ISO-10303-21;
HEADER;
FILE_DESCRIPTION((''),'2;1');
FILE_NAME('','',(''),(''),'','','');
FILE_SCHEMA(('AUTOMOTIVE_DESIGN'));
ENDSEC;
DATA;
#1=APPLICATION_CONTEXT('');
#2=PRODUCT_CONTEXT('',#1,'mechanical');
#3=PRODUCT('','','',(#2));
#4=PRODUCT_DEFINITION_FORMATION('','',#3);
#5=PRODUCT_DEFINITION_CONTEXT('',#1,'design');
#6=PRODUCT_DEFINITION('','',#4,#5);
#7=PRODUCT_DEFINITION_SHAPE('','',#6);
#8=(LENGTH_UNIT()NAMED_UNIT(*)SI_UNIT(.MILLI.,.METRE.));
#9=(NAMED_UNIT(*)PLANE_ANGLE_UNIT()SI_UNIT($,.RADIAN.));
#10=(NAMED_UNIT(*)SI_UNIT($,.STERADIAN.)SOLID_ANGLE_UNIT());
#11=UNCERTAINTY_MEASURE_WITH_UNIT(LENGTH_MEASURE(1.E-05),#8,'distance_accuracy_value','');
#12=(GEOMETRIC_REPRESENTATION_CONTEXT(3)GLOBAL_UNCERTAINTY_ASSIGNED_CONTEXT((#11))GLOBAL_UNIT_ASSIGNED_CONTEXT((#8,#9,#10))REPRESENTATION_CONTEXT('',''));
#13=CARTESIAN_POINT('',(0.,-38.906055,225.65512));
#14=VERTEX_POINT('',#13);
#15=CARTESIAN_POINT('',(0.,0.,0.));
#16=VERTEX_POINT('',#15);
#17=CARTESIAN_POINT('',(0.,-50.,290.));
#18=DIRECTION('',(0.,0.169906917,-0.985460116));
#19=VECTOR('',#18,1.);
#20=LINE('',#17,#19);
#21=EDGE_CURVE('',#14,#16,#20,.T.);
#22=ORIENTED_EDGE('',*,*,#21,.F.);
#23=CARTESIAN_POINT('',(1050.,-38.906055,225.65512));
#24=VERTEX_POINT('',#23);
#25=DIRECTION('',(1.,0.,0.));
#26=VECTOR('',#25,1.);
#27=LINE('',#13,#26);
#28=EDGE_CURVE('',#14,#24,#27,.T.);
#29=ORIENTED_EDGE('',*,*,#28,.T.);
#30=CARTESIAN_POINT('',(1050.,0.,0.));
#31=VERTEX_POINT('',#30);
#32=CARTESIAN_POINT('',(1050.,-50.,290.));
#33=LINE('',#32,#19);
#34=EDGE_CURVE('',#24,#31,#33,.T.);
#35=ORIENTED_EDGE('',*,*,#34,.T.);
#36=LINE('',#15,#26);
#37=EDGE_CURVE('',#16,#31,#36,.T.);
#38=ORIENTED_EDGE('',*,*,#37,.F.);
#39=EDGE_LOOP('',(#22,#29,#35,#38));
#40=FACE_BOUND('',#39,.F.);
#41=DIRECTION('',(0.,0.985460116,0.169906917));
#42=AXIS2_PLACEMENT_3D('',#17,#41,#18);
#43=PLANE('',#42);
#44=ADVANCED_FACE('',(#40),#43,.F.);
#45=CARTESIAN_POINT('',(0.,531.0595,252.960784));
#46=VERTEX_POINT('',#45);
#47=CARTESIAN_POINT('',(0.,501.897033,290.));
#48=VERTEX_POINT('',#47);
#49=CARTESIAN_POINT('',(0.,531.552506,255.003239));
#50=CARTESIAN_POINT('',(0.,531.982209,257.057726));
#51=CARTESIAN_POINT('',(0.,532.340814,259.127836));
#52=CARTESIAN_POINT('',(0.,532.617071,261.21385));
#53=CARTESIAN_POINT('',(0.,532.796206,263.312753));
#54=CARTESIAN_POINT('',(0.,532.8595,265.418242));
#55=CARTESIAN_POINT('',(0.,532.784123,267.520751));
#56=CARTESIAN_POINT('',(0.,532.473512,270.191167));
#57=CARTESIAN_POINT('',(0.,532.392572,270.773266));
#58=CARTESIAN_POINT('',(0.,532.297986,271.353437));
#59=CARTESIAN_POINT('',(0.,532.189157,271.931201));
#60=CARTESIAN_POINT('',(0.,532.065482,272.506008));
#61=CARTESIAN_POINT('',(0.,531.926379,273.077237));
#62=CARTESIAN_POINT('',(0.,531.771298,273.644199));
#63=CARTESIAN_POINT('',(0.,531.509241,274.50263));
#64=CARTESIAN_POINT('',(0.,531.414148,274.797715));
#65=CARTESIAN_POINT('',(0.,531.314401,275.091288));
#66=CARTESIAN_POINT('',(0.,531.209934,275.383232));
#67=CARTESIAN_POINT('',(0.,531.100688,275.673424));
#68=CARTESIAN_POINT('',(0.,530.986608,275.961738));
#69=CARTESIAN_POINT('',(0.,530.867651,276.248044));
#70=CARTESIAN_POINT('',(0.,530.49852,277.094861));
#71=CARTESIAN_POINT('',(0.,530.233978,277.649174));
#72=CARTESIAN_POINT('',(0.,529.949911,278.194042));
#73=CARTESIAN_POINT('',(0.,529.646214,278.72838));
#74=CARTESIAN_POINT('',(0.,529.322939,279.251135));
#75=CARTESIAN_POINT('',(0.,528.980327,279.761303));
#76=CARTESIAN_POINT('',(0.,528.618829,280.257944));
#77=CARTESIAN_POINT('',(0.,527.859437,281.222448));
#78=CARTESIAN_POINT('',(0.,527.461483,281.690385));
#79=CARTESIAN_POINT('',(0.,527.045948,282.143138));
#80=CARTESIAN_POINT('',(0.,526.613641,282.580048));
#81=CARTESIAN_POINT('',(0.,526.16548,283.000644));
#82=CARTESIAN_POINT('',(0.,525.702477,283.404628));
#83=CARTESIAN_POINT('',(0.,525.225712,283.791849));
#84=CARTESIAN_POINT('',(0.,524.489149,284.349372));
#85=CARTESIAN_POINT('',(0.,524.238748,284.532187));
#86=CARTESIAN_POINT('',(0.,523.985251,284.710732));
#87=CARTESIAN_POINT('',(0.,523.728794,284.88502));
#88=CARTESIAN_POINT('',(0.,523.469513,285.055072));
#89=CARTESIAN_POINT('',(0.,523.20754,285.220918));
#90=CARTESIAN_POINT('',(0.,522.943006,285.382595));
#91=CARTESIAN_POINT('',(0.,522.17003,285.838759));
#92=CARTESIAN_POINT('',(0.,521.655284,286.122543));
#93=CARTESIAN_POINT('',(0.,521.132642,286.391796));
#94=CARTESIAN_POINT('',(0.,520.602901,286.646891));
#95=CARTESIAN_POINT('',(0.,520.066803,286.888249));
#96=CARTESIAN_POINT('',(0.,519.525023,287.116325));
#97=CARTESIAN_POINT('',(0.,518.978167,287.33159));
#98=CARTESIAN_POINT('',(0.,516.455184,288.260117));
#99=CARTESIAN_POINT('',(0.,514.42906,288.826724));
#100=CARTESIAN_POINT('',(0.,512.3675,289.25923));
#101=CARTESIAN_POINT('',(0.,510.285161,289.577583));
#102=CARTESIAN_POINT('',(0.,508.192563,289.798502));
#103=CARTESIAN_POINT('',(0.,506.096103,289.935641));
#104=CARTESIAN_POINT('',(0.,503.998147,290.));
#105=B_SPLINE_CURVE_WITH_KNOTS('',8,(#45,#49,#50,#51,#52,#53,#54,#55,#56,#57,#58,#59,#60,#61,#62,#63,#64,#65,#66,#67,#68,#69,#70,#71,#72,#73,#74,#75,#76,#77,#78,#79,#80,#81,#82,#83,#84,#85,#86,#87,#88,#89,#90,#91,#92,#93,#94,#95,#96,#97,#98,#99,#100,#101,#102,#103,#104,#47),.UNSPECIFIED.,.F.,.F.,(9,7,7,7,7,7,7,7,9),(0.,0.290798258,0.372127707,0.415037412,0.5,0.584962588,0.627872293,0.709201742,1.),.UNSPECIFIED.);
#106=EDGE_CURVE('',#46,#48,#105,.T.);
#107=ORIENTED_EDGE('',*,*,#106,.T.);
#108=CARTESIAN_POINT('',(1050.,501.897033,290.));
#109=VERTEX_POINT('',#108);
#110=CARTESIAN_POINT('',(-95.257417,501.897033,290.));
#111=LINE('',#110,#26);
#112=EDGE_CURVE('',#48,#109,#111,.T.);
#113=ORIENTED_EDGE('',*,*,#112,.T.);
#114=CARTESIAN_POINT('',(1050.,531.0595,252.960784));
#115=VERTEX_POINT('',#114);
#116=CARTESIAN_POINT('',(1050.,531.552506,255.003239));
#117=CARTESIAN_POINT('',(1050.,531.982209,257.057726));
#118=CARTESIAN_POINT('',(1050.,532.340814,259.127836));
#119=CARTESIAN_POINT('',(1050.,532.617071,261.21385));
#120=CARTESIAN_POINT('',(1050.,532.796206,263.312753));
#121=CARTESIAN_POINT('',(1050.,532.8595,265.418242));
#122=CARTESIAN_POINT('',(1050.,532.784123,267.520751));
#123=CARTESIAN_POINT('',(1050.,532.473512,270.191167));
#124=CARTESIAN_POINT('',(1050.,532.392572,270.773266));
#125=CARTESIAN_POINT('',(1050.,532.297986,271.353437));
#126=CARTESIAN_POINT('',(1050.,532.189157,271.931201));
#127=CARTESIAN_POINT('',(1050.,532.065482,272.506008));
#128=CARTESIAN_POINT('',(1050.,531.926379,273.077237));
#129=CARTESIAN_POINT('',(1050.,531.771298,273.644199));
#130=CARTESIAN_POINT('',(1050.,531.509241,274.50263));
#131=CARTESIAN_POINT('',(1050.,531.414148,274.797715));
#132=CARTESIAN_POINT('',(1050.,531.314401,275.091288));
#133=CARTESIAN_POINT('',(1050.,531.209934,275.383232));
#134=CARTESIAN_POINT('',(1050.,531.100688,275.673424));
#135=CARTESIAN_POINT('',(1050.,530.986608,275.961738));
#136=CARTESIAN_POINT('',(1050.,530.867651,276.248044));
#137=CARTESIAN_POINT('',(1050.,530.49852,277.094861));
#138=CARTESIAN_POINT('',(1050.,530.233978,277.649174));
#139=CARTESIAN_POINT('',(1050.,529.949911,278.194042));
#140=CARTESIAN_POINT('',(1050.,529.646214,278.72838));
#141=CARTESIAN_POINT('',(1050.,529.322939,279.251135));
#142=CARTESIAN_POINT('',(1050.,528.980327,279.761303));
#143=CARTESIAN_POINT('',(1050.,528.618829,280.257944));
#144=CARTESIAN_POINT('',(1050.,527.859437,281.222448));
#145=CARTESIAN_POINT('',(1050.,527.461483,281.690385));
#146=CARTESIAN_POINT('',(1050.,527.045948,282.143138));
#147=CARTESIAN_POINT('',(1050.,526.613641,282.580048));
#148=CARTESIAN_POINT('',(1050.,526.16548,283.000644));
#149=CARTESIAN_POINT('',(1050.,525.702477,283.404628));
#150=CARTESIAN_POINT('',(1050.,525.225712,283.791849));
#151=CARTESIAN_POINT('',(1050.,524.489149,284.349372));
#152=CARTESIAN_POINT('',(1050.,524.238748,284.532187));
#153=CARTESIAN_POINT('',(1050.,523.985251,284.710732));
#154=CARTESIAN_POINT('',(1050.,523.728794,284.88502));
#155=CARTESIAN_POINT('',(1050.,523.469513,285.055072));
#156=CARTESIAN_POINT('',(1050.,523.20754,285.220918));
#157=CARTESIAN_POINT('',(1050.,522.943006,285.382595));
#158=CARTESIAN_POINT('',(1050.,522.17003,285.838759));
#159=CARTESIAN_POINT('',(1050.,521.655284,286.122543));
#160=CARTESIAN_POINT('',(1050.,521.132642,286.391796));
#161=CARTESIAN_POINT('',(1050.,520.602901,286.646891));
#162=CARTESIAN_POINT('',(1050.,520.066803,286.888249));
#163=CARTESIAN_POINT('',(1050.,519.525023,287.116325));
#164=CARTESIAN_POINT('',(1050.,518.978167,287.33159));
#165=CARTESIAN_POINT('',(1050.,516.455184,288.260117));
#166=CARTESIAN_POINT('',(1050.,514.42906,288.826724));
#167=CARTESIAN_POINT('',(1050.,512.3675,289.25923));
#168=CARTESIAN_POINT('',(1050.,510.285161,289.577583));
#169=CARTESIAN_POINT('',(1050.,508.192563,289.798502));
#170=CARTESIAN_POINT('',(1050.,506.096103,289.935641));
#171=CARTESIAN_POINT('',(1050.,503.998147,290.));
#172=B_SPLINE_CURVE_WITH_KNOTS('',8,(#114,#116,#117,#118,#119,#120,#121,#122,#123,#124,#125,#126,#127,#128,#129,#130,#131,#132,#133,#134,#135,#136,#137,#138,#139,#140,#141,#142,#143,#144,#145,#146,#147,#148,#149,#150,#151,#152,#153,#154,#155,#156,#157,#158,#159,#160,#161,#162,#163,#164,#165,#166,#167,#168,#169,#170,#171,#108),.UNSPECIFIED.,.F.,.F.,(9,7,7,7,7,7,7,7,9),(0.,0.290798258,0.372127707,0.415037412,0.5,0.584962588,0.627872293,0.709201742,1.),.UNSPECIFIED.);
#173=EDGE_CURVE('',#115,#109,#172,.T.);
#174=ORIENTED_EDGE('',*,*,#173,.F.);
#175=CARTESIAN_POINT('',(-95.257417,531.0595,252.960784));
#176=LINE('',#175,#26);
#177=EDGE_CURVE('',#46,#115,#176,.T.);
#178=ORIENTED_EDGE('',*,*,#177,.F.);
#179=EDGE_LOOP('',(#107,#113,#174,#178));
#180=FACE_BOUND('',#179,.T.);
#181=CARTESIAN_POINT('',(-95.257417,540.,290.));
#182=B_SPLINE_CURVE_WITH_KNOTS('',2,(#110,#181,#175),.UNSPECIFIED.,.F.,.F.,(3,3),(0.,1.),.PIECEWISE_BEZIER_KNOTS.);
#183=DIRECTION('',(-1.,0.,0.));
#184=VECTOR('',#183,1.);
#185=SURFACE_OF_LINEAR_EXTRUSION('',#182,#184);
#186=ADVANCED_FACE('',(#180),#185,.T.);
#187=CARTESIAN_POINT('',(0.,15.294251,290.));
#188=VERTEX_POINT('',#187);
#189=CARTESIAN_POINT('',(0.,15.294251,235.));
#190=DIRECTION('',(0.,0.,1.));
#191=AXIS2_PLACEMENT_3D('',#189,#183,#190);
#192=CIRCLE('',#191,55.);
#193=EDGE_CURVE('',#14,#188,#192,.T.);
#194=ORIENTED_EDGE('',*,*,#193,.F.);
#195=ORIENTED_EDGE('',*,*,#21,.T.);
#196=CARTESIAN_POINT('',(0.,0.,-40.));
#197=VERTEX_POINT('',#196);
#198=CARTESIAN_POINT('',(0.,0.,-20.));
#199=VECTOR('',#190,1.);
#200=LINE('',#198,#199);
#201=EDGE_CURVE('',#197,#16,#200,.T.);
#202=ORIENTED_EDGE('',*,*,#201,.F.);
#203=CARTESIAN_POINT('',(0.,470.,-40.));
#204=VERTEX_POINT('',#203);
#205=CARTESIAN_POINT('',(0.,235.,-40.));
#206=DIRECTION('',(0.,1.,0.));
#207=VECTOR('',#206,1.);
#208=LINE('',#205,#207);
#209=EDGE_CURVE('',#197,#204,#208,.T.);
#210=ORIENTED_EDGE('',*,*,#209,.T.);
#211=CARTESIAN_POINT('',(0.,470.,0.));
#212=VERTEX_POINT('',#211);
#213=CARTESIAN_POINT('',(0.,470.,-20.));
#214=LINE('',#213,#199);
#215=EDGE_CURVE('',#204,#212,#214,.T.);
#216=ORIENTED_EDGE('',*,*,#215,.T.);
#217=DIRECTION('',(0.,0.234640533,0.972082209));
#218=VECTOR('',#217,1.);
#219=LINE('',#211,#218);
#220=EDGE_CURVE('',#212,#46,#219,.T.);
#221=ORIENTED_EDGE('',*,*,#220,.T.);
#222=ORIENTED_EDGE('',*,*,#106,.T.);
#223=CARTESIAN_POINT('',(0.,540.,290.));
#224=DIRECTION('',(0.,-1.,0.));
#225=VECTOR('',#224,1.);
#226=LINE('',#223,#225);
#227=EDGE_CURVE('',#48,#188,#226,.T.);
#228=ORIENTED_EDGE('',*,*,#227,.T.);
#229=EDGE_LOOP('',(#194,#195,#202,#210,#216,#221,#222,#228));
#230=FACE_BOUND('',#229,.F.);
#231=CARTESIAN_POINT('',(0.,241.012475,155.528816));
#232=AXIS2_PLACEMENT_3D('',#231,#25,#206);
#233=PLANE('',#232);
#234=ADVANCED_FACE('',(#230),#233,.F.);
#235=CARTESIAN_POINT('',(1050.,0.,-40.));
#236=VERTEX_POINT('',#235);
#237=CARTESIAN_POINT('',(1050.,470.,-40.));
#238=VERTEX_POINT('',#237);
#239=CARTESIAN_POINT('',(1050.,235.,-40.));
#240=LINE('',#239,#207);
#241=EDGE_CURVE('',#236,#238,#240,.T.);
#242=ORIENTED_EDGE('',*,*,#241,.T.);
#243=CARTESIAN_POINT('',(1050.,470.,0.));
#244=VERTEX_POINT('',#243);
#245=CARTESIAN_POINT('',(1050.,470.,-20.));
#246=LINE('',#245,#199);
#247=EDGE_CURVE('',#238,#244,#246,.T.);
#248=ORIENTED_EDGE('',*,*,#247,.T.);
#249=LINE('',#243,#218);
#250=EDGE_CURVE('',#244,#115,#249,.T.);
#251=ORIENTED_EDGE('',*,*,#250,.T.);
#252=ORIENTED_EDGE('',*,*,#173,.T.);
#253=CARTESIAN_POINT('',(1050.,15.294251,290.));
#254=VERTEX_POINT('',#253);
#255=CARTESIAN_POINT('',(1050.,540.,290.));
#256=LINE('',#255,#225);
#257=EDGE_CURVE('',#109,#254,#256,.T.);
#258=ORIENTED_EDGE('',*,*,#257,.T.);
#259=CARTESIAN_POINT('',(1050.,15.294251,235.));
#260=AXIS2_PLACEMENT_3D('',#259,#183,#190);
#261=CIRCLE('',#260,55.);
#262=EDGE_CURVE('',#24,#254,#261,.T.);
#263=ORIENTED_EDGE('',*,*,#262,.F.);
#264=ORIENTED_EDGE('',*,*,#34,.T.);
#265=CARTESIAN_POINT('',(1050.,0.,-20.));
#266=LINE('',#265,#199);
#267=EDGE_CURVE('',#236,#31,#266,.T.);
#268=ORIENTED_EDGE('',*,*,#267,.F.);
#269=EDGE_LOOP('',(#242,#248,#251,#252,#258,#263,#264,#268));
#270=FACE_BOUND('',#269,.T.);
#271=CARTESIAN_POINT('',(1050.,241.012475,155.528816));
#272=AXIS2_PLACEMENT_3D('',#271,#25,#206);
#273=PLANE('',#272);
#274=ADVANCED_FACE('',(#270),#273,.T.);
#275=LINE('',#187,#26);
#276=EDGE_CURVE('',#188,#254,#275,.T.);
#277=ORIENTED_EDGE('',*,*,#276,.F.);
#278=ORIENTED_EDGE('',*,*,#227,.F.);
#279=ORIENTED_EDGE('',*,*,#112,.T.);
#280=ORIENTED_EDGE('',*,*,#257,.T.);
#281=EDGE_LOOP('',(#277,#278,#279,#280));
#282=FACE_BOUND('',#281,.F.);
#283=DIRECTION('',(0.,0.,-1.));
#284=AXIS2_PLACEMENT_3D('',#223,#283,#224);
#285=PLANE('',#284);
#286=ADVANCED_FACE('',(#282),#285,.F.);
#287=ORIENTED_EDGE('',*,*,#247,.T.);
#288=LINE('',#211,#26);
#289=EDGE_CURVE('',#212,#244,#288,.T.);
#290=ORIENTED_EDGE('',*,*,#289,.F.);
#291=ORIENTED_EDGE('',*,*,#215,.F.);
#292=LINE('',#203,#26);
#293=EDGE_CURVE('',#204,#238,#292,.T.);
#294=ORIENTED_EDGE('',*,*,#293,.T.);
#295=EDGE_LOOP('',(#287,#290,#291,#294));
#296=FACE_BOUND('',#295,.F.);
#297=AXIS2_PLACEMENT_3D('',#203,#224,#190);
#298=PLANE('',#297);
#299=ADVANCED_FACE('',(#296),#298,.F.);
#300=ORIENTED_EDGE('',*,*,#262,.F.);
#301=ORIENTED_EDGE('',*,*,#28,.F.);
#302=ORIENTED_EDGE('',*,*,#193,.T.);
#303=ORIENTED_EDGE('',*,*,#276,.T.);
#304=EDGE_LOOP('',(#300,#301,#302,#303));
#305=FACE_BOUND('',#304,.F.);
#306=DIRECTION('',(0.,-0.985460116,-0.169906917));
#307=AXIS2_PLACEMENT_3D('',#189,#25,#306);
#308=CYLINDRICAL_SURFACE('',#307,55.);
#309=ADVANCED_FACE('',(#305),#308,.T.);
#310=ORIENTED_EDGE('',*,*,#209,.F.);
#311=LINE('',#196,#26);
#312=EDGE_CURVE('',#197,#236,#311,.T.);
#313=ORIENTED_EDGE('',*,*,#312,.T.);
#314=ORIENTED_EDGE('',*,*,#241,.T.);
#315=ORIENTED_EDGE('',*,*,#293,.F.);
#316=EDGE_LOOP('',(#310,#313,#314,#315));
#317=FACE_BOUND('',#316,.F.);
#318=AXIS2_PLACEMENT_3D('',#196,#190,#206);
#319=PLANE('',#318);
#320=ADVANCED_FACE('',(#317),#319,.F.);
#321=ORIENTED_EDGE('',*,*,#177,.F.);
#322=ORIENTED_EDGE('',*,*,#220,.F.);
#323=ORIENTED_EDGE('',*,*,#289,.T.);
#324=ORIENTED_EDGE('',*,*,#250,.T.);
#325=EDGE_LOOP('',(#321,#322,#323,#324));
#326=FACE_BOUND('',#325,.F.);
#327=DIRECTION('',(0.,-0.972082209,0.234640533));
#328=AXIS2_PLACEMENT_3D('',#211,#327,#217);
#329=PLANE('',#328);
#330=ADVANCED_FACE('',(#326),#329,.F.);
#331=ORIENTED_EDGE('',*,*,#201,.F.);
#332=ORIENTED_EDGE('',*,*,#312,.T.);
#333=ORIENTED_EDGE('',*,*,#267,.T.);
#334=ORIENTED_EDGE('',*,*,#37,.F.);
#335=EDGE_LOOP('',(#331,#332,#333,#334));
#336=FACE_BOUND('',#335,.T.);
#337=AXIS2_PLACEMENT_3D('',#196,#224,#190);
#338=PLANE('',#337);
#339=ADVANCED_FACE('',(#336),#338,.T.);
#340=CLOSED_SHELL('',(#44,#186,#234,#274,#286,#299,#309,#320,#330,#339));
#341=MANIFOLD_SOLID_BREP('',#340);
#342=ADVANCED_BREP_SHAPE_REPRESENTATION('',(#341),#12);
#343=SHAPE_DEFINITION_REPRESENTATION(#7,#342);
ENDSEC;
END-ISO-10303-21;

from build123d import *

# Parameters (mm, degrees)
F0_W        = 470
F0_H        = 40
F1_DEPTH    = 1050
F2_R        = 55
F3_T1_DEPTH = 1240.5148333467


# Not quite as in the source:
# - a fillet or chamfer that OpenCascade refuses, or shapes differently, is made with other operations: its cross-section is extruded or revolved along the edge and cut away or added


with BuildPart() as f1:
    # F0 (on Right) → F1 (new body)
    with BuildSketch(Plane.YZ):
        Polygon((-50, 290), (0, 0), (470, 0), (540, 290), (470, 290), align=None)
        with Locations((235, -20)):
            Rectangle(F0_W, F0_H)
    extrude(amount=F1_DEPTH)

    # F2
    f2_edges = [f1.edges().sort_by_distance(p)[0] for p in [
        (525, -50, 290),
    ]]
    fillet(f2_edges, radius=F2_R)

    # F3: fillet of radius 30 on 1 edges, made by hand

    # F3_s2 → F3_t1 (cut)
    with BuildSketch(Plane.YZ.offset(-95.2574166733)):
        with BuildLine():
            add(Edge.make_bspline(
                [(501.8970333307, 290), (540, 290), (531.0594995879, 252.9607840069)],
                knots=[0, 0, 0, 1, 1, 1], degree=2, weights=[1, 1, 1]))
            Line((531.0594995879, 252.9607840069), (540, 290))
            Line((540, 290), (501.8970333307, 290))
        make_face()
    extrude(amount=F3_T1_DEPTH, mode=Mode.SUBTRACT)


solid = f1.part
